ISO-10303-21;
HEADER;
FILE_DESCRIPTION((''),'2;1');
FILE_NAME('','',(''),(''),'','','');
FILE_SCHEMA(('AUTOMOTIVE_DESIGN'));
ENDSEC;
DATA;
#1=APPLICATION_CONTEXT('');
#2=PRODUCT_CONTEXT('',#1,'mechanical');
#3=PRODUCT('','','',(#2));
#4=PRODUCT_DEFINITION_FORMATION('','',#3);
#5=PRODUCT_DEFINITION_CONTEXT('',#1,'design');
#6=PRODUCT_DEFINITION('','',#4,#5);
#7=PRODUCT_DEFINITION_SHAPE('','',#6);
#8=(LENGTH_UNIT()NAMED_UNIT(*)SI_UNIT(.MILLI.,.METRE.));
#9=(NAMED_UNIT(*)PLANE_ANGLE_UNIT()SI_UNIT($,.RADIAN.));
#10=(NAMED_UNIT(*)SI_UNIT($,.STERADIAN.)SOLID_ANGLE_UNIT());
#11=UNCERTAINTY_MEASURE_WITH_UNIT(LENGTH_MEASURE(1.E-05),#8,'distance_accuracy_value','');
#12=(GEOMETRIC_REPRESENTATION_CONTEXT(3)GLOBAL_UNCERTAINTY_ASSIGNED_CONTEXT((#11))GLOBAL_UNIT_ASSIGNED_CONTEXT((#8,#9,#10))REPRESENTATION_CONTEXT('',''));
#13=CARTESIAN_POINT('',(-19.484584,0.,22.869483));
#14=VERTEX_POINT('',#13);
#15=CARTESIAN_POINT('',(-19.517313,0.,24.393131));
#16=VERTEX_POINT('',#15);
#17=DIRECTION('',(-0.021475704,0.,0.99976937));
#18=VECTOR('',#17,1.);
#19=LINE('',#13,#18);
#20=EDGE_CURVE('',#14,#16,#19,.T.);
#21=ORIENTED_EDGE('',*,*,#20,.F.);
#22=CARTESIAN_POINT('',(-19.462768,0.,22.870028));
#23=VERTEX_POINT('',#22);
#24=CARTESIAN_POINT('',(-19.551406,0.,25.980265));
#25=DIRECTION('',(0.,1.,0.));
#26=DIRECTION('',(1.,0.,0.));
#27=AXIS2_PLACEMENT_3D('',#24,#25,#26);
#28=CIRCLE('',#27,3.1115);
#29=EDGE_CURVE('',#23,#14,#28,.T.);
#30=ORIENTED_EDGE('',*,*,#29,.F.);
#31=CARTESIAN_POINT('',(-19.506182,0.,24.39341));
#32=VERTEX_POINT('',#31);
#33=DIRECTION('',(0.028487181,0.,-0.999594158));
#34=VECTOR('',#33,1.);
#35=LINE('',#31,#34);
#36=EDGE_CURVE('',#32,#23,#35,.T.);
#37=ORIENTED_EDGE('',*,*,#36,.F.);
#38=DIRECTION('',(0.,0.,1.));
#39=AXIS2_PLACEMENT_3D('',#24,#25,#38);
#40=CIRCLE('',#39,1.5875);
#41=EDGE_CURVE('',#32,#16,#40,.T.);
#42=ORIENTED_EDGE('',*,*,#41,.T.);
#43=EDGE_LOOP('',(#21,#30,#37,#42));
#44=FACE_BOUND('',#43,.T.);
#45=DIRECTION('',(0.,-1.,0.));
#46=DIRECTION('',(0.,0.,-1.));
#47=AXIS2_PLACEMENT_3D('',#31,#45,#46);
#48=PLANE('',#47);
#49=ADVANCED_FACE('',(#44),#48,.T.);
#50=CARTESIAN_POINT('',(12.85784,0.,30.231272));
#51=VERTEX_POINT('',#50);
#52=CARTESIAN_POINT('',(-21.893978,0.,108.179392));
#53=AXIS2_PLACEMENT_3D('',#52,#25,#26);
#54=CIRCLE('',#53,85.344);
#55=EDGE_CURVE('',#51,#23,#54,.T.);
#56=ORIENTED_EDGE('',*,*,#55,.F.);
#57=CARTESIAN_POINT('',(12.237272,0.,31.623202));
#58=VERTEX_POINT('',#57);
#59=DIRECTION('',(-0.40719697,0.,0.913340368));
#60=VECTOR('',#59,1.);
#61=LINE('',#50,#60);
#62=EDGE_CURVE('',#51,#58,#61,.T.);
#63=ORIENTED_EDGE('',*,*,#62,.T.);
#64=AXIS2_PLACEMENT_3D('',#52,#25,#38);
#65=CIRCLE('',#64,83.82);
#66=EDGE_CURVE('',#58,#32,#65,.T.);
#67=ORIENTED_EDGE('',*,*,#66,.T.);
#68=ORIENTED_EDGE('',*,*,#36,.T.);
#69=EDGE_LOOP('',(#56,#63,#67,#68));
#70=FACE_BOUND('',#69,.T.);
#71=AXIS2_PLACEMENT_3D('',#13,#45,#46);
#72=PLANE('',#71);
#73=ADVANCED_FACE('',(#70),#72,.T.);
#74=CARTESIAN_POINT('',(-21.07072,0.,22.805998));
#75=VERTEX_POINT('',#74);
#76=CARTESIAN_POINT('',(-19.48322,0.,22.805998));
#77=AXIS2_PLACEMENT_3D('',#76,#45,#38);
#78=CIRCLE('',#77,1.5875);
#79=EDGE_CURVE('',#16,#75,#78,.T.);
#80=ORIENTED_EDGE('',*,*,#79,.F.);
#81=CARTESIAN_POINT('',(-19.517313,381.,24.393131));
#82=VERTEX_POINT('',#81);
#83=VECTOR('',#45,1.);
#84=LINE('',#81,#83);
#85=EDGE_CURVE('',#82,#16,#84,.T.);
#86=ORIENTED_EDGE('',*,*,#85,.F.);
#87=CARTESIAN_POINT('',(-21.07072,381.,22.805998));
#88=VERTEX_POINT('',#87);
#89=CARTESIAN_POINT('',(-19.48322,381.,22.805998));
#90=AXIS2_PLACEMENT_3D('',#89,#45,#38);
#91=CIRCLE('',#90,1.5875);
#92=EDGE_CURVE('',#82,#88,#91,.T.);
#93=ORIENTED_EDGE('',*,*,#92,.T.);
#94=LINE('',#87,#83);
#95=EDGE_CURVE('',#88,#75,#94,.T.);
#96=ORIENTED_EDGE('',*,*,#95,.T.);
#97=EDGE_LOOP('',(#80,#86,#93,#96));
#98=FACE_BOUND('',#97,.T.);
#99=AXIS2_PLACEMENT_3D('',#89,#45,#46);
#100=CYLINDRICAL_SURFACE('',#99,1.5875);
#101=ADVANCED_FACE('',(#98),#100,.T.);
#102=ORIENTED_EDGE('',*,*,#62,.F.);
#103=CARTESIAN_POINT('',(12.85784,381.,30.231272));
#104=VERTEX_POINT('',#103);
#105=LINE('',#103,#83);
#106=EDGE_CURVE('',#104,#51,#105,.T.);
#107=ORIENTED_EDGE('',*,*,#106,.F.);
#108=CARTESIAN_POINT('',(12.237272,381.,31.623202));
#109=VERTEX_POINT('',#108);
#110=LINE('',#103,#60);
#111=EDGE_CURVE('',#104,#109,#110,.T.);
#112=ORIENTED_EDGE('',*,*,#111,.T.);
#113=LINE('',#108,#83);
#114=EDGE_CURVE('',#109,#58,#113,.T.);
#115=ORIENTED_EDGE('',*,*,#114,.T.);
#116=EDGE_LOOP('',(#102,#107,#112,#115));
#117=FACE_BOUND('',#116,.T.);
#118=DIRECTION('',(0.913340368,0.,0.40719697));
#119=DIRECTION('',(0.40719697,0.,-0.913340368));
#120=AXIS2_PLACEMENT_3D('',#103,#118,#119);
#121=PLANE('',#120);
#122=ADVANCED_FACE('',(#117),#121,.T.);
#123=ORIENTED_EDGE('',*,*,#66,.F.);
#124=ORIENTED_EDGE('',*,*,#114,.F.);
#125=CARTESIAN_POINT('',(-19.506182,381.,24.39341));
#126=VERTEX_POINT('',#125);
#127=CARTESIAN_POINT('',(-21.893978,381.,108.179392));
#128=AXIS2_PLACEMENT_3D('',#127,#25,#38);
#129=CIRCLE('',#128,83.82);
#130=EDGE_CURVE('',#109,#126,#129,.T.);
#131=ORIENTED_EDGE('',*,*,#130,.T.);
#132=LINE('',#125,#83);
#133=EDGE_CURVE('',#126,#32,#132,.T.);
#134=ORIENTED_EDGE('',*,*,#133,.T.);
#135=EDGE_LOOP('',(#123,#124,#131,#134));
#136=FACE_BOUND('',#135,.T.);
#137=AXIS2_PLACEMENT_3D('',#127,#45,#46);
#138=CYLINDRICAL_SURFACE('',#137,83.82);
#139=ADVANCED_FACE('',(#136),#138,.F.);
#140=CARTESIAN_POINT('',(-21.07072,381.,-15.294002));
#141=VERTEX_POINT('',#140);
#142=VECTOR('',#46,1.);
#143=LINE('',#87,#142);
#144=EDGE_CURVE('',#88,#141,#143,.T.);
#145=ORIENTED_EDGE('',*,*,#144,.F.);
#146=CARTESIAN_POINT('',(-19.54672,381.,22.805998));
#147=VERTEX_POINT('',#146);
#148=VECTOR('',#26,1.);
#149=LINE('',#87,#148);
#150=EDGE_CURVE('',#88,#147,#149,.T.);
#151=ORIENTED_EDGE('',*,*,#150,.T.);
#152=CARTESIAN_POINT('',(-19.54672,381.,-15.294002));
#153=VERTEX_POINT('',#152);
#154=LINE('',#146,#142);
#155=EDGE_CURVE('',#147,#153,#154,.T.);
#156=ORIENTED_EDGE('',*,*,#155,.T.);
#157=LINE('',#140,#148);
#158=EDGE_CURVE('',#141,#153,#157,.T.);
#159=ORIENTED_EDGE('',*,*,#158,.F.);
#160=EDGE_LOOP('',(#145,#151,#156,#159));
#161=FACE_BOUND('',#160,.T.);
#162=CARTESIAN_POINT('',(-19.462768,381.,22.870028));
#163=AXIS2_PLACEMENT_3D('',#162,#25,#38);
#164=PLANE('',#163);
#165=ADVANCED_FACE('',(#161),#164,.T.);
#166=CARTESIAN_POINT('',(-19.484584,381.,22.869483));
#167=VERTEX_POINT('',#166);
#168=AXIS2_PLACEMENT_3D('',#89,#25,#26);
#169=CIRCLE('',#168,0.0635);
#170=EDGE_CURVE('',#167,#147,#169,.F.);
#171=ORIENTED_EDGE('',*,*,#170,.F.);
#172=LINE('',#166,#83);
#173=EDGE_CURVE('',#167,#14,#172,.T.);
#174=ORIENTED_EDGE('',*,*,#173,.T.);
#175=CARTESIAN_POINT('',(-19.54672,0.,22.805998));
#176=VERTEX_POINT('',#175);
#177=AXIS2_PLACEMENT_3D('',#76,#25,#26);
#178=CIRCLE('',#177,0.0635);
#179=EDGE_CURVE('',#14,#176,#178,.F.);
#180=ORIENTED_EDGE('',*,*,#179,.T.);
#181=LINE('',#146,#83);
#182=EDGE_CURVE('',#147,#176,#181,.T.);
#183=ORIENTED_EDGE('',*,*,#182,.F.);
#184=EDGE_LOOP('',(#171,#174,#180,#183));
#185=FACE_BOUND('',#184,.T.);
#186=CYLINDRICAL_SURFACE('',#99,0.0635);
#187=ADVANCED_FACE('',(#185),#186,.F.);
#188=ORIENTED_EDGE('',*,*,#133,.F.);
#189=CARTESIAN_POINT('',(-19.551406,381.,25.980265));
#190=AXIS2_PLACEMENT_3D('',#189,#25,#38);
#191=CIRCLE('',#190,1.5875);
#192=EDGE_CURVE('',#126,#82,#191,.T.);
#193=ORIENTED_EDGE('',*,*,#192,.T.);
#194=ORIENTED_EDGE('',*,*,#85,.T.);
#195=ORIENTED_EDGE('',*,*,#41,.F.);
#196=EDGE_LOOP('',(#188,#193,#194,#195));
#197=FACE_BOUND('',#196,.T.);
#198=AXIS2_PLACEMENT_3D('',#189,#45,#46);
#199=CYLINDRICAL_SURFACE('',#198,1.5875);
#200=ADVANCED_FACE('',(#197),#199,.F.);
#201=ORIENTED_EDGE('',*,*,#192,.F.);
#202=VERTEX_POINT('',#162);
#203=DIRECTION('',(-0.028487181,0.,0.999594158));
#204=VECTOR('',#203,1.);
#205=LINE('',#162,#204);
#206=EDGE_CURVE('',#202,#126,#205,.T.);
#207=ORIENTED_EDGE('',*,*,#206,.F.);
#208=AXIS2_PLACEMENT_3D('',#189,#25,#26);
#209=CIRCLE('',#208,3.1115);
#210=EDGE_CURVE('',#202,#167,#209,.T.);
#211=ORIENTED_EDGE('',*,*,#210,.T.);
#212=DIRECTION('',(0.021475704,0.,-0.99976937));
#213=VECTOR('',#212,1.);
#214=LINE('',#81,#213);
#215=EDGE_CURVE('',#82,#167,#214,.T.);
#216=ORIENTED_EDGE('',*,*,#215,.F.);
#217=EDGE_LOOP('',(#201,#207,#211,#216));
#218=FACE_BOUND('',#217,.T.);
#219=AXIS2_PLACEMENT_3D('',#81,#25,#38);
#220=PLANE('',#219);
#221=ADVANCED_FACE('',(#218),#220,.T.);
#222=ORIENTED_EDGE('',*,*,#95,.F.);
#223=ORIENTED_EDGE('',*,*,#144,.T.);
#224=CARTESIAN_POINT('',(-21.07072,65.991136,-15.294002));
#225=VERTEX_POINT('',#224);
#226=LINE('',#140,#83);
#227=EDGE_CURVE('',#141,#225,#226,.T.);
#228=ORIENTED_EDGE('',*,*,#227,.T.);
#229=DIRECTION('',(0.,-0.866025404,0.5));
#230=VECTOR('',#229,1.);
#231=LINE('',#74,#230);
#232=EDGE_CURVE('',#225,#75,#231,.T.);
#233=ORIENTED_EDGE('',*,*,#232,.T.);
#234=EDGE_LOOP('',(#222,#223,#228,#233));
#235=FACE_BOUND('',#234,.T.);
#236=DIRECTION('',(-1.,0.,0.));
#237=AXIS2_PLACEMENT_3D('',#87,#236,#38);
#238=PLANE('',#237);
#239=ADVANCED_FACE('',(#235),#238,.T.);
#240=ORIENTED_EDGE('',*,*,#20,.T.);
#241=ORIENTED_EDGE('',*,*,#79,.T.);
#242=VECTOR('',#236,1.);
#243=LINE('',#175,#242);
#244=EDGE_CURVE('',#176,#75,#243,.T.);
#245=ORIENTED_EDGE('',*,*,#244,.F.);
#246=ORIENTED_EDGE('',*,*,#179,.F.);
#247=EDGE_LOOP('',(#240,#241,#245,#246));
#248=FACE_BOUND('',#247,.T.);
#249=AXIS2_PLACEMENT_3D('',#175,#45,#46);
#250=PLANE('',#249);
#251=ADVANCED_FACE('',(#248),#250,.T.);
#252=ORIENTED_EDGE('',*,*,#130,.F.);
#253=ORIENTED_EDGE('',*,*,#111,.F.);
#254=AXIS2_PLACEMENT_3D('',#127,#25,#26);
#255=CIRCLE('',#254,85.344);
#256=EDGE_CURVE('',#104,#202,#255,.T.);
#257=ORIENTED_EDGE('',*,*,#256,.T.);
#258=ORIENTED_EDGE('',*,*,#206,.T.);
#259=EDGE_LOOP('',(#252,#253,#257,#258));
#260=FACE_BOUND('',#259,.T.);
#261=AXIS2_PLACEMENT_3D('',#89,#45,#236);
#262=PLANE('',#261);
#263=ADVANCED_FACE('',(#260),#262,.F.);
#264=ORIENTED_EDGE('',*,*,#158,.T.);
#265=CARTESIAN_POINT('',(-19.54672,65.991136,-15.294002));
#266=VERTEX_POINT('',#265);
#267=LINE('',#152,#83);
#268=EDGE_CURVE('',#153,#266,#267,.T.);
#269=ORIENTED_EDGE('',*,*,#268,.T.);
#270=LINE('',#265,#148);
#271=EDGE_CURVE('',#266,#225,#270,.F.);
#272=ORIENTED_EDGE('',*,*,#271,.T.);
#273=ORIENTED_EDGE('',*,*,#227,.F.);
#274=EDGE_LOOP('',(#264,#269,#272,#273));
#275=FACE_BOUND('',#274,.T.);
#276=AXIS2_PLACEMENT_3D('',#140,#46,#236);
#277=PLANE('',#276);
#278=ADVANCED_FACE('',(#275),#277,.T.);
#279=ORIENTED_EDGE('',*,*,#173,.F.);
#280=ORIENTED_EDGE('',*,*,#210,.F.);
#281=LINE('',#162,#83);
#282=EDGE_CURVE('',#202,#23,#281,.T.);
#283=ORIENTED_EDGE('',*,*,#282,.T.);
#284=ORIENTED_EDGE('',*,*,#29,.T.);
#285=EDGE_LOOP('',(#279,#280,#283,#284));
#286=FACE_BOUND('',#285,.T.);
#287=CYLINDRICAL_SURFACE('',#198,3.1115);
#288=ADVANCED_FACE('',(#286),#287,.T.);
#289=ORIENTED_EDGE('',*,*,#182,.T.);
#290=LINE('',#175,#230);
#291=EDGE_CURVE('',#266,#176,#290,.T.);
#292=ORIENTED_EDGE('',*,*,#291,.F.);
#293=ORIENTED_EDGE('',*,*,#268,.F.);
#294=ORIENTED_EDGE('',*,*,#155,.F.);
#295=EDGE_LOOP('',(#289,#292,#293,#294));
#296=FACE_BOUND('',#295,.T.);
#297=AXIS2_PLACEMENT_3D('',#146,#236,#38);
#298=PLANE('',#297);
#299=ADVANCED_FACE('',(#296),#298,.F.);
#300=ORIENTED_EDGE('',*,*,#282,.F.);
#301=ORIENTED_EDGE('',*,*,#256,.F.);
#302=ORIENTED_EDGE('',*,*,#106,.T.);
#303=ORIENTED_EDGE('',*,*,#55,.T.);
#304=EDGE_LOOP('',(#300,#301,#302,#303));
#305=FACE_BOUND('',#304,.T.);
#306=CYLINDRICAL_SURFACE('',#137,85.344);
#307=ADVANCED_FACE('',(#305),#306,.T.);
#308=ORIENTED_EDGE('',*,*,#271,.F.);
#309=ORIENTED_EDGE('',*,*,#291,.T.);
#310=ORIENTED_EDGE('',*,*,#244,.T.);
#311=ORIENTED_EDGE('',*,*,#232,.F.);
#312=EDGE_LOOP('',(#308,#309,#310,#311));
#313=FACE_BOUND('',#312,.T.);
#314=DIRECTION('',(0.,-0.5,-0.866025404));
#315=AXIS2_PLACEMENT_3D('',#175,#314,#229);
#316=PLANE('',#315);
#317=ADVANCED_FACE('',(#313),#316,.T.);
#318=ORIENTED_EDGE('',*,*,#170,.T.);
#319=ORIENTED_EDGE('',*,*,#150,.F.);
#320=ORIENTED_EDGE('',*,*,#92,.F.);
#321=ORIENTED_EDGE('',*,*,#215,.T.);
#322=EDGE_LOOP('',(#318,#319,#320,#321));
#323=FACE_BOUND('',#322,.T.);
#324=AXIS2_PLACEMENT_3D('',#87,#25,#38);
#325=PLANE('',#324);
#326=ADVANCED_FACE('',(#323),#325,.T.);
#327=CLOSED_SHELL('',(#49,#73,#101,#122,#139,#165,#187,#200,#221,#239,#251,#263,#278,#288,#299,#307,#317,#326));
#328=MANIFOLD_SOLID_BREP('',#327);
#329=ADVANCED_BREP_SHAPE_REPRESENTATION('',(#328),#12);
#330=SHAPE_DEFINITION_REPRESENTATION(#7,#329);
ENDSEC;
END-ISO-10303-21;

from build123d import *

# Parameters (mm, degrees)
BASE_FLANGE1_DEPTH = 381
CUT_EXTRUDE3_DEPTH = 384.680964443


# Read off the part's stored shape, not the designer's step: Base-Flange1
with BuildPart() as part:
    # Base-Flange1 outline → Base-Flange1 (new body)
    with BuildSketch(Plane(origin=(0, 0, 0), x_dir=(1, 0, 0), z_dir=(0, 1, 0))):
        with BuildLine():
            Line((-19.546720325, -22.80599753), (-19.546720325, 15.29400247))
            Line((-19.546720325, 15.29400247), (-21.070720325, 15.29400247))
            Line((-21.070720325, 15.29400247), (-21.070720325, -22.80599753))
            ThreePointArc((-21.070720325, -22.80599753), (-20.617741894, -23.916410543), (-19.517313006, -24.393131405))
            ThreePointArc((-19.517313006, -24.393131405), (-19.511747403, -24.393260722), (-19.506182287, -24.393409555))
            ThreePointArc((-19.506182287, -24.393409555), (-3.280067744, -26.452317081), (12.23727224, -31.623202224))
            Line((12.23727224, -31.623202224), (12.857840422, -30.231271503))
            ThreePointArc((12.857840422, -30.231271503), (-2.941633017, -24.966370266), (-19.462767824, -22.870028058))
            ThreePointArc((-19.462767824, -22.870028058), (-19.47367545, -22.869736345), (-19.484584032, -22.869482885))
            ThreePointArc((-19.484584032, -22.869482885), (-19.528601188, -22.85041405), (-19.546720325, -22.80599753))
        make_face()
    extrude(amount=BASE_FLANGE1_DEPTH)

    # Sketch5 → Cut-Extrude3 (cut, through all)
    with BuildSketch(Plane(origin=(-19.546720325, 0, 0), x_dir=(0, 0, -1), z_dir=(1, 0, 0))):
        Polygon((-22.80599753, 0), (15.29400247, 65.991135768), (15.29400247, 0), align=None)
    extrude(amount=-CUT_EXTRUDE3_DEPTH, mode=Mode.SUBTRACT)


solid = part.part
